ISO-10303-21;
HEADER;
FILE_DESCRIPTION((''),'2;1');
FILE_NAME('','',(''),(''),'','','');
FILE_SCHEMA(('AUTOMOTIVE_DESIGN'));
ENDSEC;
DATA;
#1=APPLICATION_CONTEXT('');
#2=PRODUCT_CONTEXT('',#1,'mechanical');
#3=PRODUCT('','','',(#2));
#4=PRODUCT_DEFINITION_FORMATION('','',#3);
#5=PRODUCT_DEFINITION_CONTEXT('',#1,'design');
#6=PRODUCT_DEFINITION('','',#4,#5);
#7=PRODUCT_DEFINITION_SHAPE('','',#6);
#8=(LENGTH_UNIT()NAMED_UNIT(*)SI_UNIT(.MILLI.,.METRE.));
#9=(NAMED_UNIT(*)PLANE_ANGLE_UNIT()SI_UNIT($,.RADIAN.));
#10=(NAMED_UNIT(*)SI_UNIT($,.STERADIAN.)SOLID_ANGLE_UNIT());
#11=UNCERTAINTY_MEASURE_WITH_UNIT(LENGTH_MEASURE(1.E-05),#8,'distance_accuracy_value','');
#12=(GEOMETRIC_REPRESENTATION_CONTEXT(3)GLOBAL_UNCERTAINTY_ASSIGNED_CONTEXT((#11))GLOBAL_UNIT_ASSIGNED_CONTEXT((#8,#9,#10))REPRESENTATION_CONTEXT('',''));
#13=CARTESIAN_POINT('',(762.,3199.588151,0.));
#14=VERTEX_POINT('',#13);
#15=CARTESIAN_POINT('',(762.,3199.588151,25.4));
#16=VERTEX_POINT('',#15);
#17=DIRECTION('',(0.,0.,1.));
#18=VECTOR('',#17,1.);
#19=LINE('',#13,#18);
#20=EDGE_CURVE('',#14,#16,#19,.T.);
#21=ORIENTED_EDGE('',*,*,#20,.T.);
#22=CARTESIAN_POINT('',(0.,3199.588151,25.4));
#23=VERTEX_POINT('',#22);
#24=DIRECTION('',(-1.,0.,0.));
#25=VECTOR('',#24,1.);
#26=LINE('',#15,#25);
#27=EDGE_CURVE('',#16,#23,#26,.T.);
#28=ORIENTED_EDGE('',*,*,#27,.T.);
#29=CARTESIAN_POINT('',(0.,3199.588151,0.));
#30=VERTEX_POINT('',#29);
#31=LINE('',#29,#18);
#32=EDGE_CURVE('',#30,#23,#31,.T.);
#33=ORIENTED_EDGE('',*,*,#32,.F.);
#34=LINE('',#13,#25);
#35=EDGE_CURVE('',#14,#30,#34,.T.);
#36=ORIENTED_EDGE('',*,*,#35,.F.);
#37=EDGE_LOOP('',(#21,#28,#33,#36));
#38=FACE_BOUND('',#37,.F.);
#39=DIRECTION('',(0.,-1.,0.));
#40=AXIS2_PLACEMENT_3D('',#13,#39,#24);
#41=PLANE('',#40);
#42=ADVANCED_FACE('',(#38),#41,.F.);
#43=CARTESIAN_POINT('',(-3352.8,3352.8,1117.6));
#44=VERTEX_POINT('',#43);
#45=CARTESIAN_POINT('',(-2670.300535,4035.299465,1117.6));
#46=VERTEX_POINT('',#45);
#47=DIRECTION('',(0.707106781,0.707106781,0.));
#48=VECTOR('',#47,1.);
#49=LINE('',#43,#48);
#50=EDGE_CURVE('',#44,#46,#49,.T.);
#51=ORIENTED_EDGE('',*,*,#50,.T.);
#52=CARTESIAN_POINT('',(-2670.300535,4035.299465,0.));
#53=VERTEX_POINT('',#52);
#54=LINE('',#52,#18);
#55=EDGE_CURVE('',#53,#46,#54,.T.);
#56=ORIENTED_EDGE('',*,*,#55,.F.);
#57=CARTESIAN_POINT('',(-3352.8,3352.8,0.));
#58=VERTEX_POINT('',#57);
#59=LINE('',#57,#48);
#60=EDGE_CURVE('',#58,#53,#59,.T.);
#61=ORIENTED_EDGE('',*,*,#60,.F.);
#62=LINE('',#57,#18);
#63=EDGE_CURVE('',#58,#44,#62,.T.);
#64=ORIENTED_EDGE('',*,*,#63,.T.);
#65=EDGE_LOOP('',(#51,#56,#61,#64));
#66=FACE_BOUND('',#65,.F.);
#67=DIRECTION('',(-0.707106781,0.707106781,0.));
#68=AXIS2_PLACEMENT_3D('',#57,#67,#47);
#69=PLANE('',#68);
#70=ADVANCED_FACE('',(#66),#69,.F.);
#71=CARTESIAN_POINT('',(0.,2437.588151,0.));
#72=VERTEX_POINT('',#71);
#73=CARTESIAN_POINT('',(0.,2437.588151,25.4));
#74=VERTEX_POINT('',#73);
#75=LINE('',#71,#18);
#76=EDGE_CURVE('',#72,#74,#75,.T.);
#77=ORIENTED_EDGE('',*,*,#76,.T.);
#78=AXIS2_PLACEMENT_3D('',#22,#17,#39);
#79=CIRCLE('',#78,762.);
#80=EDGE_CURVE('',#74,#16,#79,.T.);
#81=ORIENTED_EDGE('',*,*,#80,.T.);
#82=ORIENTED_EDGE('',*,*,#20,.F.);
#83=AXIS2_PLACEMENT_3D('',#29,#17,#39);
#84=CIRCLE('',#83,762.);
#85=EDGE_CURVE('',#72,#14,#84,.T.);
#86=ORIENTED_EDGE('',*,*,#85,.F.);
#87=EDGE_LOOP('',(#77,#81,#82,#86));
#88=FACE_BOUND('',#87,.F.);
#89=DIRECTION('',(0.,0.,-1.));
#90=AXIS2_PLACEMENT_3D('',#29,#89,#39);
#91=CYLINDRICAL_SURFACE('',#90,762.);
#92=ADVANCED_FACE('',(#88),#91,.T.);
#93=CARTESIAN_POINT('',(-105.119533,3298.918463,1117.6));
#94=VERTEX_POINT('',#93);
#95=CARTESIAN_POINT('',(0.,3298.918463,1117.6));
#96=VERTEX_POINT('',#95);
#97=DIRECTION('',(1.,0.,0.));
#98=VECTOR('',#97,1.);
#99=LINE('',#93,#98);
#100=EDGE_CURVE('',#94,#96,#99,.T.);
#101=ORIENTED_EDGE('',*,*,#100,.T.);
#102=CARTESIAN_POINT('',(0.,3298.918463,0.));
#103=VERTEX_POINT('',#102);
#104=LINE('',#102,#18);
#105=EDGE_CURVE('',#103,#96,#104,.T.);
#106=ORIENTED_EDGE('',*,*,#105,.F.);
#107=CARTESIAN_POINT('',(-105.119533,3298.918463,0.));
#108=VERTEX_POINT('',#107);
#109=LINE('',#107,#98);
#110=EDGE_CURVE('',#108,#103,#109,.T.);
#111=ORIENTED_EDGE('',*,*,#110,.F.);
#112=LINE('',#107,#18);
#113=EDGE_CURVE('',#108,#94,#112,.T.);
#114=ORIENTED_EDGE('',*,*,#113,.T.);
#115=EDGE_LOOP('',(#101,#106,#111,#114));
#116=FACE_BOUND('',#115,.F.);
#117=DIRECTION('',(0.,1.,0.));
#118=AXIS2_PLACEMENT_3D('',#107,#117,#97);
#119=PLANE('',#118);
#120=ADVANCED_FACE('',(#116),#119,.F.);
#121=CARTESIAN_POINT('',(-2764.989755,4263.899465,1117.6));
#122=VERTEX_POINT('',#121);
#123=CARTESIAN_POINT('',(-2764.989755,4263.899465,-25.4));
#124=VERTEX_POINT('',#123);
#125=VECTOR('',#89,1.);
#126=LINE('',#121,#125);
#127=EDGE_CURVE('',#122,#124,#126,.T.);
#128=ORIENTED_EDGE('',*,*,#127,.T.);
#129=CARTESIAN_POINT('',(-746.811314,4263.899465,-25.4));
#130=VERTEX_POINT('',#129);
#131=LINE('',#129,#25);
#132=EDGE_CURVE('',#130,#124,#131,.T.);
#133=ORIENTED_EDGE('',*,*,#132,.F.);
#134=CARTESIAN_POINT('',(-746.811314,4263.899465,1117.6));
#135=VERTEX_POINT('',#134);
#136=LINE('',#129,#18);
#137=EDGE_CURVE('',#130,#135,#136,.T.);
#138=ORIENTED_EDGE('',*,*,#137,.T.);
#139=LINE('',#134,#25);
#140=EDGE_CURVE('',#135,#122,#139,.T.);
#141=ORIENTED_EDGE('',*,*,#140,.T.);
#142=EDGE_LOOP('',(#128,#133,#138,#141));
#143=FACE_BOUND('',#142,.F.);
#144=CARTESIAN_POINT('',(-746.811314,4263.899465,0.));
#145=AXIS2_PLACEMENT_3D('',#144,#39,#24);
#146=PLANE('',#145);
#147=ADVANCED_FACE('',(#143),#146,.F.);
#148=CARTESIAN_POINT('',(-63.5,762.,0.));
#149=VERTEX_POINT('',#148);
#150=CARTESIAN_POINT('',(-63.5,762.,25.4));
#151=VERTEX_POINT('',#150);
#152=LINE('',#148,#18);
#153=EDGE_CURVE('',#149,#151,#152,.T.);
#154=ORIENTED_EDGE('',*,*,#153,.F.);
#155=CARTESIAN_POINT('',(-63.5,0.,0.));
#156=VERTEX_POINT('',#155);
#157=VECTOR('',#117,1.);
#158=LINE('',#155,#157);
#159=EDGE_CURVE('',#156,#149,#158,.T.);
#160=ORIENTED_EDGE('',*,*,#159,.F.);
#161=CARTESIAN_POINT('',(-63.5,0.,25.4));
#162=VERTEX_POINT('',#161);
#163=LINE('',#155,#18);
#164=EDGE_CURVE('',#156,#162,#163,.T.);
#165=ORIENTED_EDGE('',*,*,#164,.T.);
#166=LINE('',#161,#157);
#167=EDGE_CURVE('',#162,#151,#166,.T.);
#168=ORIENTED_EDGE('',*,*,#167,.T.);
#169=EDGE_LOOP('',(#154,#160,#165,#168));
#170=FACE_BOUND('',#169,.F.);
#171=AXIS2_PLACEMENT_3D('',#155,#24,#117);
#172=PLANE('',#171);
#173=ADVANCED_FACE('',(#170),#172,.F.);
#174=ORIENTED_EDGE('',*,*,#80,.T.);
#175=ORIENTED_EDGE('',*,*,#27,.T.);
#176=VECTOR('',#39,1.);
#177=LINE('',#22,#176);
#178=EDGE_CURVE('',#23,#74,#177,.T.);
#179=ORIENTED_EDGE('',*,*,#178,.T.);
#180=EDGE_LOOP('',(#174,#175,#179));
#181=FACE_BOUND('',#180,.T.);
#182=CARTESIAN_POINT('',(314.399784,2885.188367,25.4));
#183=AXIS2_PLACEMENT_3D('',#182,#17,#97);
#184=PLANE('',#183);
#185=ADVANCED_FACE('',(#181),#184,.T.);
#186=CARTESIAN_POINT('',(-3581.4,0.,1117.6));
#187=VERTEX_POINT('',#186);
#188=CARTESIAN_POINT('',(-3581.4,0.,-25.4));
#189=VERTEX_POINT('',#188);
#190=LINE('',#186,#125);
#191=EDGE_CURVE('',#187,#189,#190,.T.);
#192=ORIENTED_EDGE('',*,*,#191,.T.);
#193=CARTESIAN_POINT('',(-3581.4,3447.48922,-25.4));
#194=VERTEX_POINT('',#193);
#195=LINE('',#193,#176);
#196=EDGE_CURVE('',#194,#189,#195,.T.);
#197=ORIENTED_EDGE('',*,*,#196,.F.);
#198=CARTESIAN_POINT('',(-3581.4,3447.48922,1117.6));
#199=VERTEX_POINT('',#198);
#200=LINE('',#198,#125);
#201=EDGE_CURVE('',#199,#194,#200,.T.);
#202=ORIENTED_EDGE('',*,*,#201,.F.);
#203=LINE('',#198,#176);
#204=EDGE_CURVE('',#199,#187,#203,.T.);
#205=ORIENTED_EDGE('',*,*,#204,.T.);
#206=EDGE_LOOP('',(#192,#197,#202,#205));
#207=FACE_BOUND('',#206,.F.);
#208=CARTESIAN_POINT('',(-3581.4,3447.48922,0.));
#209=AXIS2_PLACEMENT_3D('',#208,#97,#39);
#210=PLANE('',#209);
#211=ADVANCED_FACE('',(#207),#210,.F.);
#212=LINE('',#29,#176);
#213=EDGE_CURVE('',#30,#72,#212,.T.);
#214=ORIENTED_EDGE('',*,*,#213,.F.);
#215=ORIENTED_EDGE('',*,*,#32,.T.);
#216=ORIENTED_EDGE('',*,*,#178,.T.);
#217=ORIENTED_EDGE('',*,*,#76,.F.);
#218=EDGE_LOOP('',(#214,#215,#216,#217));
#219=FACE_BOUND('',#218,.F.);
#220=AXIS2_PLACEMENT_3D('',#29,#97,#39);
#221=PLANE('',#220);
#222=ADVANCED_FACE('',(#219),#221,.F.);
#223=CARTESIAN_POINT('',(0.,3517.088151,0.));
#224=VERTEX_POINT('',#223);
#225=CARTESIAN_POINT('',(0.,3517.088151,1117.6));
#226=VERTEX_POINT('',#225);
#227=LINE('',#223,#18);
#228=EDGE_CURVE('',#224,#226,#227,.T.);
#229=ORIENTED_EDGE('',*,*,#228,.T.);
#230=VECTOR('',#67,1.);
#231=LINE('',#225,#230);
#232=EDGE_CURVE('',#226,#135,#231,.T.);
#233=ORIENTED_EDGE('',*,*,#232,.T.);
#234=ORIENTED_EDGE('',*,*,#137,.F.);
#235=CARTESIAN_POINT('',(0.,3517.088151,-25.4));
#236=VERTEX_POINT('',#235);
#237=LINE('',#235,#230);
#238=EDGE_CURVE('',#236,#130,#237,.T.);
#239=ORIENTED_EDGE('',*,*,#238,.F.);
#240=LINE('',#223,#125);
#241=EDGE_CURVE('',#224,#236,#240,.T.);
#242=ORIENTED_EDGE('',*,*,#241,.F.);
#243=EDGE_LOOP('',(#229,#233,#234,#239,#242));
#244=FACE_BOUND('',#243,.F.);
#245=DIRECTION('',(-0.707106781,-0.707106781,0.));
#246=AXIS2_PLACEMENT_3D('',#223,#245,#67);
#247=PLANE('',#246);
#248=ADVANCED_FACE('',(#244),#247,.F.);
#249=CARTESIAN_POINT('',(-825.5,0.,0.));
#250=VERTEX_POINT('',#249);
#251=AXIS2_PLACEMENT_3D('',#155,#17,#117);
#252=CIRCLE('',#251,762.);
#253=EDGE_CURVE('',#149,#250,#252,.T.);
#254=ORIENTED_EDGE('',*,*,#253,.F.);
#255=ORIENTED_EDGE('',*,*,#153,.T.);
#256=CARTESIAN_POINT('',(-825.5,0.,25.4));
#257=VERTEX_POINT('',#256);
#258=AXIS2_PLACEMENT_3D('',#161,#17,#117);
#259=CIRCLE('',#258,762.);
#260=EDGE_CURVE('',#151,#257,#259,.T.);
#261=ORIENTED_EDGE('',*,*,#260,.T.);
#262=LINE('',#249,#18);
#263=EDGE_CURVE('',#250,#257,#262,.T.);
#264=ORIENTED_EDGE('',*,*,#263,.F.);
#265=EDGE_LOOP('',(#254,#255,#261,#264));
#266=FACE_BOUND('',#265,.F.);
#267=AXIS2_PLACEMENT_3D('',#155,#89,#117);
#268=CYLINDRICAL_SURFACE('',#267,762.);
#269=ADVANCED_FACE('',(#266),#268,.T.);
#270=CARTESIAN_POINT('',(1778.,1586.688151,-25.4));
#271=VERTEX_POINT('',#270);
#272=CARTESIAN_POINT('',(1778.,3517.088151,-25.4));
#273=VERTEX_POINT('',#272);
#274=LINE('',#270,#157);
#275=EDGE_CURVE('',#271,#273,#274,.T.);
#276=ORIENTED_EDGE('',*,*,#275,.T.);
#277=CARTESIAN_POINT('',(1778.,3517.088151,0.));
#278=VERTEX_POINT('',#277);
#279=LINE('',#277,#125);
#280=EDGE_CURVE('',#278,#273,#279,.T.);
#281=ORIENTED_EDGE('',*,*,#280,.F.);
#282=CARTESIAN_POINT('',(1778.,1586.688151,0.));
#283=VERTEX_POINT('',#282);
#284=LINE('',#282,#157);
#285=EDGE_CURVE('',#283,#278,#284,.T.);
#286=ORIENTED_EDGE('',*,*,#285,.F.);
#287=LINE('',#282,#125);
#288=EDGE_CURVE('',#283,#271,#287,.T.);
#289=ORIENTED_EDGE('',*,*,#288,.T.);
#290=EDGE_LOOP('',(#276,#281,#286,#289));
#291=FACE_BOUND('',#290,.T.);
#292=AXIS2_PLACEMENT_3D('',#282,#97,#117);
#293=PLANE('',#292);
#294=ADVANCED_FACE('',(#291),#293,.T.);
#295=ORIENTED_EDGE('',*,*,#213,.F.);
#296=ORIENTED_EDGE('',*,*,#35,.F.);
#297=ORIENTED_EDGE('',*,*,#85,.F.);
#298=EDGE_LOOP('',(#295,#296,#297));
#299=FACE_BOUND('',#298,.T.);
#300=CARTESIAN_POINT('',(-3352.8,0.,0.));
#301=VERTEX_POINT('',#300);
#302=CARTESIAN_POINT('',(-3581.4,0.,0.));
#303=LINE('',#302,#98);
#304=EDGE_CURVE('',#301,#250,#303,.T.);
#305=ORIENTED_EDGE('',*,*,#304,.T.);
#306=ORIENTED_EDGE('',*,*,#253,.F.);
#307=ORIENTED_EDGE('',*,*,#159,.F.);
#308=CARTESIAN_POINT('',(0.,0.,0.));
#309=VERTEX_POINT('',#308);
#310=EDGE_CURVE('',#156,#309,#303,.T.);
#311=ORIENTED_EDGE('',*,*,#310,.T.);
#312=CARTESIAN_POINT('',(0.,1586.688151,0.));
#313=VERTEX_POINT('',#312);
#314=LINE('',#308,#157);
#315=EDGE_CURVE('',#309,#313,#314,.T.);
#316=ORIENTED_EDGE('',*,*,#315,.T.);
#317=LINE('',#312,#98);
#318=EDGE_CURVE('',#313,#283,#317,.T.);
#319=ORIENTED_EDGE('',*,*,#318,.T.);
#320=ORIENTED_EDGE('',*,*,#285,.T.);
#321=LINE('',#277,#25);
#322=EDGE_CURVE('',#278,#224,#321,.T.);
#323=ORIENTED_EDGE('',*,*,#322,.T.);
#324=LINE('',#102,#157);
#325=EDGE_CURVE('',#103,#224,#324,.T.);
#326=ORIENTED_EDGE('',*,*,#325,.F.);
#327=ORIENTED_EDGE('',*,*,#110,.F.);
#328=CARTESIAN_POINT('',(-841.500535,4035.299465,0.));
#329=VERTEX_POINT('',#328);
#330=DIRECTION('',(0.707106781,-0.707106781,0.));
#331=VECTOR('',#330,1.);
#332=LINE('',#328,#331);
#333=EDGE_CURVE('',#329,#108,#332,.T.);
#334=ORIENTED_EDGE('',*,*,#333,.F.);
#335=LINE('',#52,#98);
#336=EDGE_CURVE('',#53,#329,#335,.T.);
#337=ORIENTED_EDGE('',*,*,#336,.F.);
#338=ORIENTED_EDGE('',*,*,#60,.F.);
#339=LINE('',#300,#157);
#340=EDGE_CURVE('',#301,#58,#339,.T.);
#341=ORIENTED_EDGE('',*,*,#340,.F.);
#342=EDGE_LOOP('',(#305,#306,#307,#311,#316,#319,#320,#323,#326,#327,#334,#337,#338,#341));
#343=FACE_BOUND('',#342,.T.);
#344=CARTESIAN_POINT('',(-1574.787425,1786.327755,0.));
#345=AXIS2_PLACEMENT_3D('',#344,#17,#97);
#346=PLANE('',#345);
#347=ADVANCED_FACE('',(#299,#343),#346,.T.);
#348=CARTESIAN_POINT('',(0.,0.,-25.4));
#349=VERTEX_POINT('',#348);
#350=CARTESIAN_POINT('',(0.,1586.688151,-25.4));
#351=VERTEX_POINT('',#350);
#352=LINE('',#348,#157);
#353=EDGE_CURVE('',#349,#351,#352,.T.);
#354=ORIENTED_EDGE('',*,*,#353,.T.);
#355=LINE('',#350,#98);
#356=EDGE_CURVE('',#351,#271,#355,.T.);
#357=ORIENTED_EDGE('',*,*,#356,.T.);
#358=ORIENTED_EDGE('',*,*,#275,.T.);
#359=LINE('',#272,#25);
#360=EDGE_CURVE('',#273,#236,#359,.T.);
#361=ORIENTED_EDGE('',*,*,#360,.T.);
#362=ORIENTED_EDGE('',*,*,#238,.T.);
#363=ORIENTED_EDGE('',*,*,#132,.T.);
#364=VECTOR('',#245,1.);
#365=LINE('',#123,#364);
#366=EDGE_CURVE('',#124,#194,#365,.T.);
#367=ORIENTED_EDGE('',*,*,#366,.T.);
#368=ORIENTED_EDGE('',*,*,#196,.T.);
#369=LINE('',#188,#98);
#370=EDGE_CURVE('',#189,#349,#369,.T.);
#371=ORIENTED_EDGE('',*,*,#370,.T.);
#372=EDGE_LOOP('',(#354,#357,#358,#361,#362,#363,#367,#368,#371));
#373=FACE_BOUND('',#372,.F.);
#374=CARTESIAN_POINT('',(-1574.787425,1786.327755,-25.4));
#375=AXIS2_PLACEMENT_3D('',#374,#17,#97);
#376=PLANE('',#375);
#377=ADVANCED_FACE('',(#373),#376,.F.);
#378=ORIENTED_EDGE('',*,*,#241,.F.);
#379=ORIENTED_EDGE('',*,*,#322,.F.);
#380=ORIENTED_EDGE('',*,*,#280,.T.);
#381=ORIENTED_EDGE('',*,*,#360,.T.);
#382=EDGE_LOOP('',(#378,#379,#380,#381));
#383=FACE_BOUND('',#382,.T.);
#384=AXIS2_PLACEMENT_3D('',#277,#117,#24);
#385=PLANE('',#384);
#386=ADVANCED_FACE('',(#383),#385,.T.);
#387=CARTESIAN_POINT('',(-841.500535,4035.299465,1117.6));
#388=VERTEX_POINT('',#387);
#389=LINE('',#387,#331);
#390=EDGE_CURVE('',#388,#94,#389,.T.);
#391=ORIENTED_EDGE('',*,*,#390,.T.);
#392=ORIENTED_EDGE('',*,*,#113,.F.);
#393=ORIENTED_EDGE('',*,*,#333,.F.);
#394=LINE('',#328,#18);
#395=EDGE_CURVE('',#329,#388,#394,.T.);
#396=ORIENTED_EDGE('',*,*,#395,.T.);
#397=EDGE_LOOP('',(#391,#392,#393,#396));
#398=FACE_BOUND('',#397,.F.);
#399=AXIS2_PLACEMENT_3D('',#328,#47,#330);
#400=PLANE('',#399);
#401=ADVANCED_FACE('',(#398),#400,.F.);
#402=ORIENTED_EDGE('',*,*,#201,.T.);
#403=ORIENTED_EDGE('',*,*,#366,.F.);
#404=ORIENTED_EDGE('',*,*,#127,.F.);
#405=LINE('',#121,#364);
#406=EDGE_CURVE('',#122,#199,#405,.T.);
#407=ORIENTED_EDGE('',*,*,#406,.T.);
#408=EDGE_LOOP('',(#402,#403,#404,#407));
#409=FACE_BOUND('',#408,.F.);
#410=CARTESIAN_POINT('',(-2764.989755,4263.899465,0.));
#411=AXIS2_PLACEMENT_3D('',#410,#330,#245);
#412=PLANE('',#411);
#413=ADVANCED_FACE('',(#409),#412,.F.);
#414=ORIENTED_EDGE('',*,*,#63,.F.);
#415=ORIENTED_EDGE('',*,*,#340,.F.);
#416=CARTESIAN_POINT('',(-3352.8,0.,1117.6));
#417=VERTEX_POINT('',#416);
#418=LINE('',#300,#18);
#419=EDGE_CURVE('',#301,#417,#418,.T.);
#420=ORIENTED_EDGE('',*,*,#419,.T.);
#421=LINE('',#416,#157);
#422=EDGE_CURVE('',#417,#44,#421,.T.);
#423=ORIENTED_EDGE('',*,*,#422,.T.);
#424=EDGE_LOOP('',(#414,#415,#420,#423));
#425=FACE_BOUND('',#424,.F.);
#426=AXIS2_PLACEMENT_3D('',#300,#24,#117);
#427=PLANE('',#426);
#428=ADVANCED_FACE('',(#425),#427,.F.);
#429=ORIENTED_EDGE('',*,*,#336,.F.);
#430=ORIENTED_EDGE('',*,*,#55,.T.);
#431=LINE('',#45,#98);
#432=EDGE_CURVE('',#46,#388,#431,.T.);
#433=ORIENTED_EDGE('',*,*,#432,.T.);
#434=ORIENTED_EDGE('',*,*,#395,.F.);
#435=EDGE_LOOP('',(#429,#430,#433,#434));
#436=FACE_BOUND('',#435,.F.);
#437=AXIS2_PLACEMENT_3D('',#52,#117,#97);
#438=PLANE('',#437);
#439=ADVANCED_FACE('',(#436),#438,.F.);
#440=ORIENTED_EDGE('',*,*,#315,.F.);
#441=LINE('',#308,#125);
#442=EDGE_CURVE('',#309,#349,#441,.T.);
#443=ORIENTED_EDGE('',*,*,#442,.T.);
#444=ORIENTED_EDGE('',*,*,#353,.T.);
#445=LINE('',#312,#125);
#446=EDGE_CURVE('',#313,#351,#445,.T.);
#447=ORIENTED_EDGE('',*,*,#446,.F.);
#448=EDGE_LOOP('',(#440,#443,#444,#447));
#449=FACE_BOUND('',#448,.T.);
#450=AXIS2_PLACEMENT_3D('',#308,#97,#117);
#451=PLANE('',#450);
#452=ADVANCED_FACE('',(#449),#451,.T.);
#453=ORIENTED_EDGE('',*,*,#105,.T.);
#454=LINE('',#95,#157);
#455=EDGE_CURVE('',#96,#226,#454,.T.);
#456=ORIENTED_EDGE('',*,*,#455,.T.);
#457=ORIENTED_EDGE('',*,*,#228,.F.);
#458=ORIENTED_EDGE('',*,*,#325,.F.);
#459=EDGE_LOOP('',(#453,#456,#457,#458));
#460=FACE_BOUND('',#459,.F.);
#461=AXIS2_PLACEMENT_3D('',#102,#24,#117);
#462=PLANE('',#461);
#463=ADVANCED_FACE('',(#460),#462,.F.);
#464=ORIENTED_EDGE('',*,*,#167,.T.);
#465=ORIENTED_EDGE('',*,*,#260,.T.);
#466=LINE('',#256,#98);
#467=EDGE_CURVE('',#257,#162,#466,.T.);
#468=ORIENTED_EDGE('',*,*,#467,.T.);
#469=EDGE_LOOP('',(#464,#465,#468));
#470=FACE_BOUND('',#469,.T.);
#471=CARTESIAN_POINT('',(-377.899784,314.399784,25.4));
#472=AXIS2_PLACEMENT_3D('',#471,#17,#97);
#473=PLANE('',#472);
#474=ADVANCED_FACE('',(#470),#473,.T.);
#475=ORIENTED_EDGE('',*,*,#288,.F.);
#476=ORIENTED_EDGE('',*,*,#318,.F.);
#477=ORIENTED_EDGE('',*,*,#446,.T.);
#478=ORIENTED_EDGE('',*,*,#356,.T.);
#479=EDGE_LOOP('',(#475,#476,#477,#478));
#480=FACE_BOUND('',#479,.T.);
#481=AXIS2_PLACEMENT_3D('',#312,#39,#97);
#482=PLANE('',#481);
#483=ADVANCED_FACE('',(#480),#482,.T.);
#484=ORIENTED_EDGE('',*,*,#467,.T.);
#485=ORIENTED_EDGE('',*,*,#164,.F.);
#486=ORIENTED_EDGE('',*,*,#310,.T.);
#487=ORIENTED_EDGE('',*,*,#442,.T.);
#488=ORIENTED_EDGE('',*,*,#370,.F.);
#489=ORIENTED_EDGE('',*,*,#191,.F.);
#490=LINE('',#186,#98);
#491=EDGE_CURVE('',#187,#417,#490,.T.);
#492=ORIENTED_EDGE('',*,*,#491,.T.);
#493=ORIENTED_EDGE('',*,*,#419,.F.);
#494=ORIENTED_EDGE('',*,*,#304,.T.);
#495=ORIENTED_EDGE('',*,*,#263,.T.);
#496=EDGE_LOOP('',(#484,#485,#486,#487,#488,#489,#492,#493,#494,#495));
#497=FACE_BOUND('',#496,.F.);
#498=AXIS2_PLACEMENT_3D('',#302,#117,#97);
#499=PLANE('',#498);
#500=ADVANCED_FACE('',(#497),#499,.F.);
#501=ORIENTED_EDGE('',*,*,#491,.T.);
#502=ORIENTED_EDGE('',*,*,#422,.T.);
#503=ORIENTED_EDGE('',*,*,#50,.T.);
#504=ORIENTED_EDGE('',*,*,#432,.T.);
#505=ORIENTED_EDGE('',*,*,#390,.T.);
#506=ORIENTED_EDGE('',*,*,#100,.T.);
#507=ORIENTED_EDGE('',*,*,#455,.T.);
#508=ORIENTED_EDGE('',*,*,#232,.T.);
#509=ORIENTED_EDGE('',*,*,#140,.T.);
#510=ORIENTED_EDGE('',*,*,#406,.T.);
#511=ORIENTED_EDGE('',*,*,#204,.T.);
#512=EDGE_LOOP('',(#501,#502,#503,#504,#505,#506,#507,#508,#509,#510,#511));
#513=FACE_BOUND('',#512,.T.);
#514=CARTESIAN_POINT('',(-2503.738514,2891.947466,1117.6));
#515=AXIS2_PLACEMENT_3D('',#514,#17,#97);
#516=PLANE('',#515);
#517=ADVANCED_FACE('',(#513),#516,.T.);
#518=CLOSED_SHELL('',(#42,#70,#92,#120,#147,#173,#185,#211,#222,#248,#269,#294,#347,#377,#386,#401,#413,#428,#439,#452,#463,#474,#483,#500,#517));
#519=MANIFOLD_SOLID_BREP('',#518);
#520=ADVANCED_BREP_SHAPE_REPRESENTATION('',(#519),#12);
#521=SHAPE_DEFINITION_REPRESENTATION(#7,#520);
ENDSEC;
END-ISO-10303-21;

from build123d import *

# Parameters (mm, degrees)
F1_DEPTH = 25.4
F2_DEPTH = 25.4
F3_DEPTH = 1117.6


# Not quite as in the source:
# - the program builds the solid bodies; features that only make, move or delete a surface that nothing else refers to are left out


with BuildPart() as f1:
    # F0 (on Top) → F1 (new body)
    with BuildSketch(Plane.XY):
        with BuildLine():
            Line((-63.5, 0), (0, 0))
            Line((0, 0), (0, 1586.688150761))
            Line((0, 1586.688150761), (0, 2437.588150761))
            Line((0, 2437.588150761), (0, 3199.588150761))
            Line((0, 3199.588150761), (0, 3298.9184632736))
            Line((0, 3298.9184632736), (-105.1195328711, 3298.9184632736))
            Line((-105.1195328711, 3298.9184632736), (-841.5005347987, 4035.2994652013))
            Line((-841.5005347987, 4035.2994652013), (-2670.3005347987, 4035.2994652013))
            Line((-2670.3005347987, 4035.2994652013), (-3352.8, 3352.8))
            Line((-3352.8, 3352.8), (-3352.8, 0))
            Line((-3352.8, 0), (-825.5, 0))
            ThreePointArc((-825.5, 0), (-602.3153672642, 538.8153672642), (-63.5, 762))
            Line((-63.5, 762), (-63.5, 0))
        make_face()
        with BuildLine():
            Line((-825.5, 0), (-63.5, 0))
            Line((-63.5, 0), (-63.5, 762))
            ThreePointArc((-63.5, 762), (-602.3153672642, 538.8153672642), (-825.5, 0))
        make_face()
        with BuildLine():
            Line((0, 2437.588150761), (0, 1586.688150761))
            Line((0, 1586.688150761), (1778, 1586.688150761))
            Line((1778, 1586.688150761), (1778, 3517.088150761))
            Line((1778, 3517.088150761), (0, 3517.088150761))
            Line((0, 3517.088150761), (0, 3298.9184632736))
            Line((0, 3298.9184632736), (0, 3199.588150761))
            Line((0, 3199.588150761), (762, 3199.588150761))
            ThreePointArc((762, 3199.588150761), (538.8153672641, 2660.7727834969), (0, 2437.588150761))
        make_face()
        Polygon((-3581.4, 0), (-3352.8, 0), (-3352.8, 3352.8), (-2670.3005347987, 4035.2994652013), (-841.5005347987, 4035.2994652013), (-105.1195328711, 3298.9184632736), (0, 3298.9184632736), (0, 3517.088150761), (-746.8113144403, 4263.8994652013), (-2764.9897551572, 4263.8994652013), (-3581.4, 3447.4892203585), align=None)
        with BuildLine():
            Line((0, 3199.588150761), (0, 2437.588150761))
            ThreePointArc((0, 2437.588150761), (538.8153672641, 2660.7727834969), (762, 3199.588150761))
            Line((762, 3199.588150761), (0, 3199.588150761))
        make_face()
    extrude(amount=-F1_DEPTH)

    # F0 (on Top) → F2 (join)
    with BuildSketch(Plane.XY):
        with BuildLine():
            Line((0, 3199.588150761), (0, 2437.588150761))
            ThreePointArc((0, 2437.588150761), (538.8153672641, 2660.7727834969), (762, 3199.588150761))
            Line((762, 3199.588150761), (0, 3199.588150761))
        make_face()
        with BuildLine():
            Line((-825.5, 0), (-63.5, 0))
            Line((-63.5, 0), (-63.5, 762))
            ThreePointArc((-63.5, 762), (-602.3153672642, 538.8153672642), (-825.5, 0))
        make_face()
    extrude(amount=F2_DEPTH)

    # F0 (on Top) → F3 (join)
    with BuildSketch(Plane.XY):
        Polygon((-3581.4, 0), (-3352.8, 0), (-3352.8, 3352.8), (-2670.3005347987, 4035.2994652013), (-841.5005347987, 4035.2994652013), (-105.1195328711, 3298.9184632736), (0, 3298.9184632736), (0, 3517.088150761), (-746.8113144403, 4263.8994652013), (-2764.9897551572, 4263.8994652013), (-3581.4, 3447.4892203585), align=None)
    extrude(amount=F3_DEPTH)


solid = f1.part
